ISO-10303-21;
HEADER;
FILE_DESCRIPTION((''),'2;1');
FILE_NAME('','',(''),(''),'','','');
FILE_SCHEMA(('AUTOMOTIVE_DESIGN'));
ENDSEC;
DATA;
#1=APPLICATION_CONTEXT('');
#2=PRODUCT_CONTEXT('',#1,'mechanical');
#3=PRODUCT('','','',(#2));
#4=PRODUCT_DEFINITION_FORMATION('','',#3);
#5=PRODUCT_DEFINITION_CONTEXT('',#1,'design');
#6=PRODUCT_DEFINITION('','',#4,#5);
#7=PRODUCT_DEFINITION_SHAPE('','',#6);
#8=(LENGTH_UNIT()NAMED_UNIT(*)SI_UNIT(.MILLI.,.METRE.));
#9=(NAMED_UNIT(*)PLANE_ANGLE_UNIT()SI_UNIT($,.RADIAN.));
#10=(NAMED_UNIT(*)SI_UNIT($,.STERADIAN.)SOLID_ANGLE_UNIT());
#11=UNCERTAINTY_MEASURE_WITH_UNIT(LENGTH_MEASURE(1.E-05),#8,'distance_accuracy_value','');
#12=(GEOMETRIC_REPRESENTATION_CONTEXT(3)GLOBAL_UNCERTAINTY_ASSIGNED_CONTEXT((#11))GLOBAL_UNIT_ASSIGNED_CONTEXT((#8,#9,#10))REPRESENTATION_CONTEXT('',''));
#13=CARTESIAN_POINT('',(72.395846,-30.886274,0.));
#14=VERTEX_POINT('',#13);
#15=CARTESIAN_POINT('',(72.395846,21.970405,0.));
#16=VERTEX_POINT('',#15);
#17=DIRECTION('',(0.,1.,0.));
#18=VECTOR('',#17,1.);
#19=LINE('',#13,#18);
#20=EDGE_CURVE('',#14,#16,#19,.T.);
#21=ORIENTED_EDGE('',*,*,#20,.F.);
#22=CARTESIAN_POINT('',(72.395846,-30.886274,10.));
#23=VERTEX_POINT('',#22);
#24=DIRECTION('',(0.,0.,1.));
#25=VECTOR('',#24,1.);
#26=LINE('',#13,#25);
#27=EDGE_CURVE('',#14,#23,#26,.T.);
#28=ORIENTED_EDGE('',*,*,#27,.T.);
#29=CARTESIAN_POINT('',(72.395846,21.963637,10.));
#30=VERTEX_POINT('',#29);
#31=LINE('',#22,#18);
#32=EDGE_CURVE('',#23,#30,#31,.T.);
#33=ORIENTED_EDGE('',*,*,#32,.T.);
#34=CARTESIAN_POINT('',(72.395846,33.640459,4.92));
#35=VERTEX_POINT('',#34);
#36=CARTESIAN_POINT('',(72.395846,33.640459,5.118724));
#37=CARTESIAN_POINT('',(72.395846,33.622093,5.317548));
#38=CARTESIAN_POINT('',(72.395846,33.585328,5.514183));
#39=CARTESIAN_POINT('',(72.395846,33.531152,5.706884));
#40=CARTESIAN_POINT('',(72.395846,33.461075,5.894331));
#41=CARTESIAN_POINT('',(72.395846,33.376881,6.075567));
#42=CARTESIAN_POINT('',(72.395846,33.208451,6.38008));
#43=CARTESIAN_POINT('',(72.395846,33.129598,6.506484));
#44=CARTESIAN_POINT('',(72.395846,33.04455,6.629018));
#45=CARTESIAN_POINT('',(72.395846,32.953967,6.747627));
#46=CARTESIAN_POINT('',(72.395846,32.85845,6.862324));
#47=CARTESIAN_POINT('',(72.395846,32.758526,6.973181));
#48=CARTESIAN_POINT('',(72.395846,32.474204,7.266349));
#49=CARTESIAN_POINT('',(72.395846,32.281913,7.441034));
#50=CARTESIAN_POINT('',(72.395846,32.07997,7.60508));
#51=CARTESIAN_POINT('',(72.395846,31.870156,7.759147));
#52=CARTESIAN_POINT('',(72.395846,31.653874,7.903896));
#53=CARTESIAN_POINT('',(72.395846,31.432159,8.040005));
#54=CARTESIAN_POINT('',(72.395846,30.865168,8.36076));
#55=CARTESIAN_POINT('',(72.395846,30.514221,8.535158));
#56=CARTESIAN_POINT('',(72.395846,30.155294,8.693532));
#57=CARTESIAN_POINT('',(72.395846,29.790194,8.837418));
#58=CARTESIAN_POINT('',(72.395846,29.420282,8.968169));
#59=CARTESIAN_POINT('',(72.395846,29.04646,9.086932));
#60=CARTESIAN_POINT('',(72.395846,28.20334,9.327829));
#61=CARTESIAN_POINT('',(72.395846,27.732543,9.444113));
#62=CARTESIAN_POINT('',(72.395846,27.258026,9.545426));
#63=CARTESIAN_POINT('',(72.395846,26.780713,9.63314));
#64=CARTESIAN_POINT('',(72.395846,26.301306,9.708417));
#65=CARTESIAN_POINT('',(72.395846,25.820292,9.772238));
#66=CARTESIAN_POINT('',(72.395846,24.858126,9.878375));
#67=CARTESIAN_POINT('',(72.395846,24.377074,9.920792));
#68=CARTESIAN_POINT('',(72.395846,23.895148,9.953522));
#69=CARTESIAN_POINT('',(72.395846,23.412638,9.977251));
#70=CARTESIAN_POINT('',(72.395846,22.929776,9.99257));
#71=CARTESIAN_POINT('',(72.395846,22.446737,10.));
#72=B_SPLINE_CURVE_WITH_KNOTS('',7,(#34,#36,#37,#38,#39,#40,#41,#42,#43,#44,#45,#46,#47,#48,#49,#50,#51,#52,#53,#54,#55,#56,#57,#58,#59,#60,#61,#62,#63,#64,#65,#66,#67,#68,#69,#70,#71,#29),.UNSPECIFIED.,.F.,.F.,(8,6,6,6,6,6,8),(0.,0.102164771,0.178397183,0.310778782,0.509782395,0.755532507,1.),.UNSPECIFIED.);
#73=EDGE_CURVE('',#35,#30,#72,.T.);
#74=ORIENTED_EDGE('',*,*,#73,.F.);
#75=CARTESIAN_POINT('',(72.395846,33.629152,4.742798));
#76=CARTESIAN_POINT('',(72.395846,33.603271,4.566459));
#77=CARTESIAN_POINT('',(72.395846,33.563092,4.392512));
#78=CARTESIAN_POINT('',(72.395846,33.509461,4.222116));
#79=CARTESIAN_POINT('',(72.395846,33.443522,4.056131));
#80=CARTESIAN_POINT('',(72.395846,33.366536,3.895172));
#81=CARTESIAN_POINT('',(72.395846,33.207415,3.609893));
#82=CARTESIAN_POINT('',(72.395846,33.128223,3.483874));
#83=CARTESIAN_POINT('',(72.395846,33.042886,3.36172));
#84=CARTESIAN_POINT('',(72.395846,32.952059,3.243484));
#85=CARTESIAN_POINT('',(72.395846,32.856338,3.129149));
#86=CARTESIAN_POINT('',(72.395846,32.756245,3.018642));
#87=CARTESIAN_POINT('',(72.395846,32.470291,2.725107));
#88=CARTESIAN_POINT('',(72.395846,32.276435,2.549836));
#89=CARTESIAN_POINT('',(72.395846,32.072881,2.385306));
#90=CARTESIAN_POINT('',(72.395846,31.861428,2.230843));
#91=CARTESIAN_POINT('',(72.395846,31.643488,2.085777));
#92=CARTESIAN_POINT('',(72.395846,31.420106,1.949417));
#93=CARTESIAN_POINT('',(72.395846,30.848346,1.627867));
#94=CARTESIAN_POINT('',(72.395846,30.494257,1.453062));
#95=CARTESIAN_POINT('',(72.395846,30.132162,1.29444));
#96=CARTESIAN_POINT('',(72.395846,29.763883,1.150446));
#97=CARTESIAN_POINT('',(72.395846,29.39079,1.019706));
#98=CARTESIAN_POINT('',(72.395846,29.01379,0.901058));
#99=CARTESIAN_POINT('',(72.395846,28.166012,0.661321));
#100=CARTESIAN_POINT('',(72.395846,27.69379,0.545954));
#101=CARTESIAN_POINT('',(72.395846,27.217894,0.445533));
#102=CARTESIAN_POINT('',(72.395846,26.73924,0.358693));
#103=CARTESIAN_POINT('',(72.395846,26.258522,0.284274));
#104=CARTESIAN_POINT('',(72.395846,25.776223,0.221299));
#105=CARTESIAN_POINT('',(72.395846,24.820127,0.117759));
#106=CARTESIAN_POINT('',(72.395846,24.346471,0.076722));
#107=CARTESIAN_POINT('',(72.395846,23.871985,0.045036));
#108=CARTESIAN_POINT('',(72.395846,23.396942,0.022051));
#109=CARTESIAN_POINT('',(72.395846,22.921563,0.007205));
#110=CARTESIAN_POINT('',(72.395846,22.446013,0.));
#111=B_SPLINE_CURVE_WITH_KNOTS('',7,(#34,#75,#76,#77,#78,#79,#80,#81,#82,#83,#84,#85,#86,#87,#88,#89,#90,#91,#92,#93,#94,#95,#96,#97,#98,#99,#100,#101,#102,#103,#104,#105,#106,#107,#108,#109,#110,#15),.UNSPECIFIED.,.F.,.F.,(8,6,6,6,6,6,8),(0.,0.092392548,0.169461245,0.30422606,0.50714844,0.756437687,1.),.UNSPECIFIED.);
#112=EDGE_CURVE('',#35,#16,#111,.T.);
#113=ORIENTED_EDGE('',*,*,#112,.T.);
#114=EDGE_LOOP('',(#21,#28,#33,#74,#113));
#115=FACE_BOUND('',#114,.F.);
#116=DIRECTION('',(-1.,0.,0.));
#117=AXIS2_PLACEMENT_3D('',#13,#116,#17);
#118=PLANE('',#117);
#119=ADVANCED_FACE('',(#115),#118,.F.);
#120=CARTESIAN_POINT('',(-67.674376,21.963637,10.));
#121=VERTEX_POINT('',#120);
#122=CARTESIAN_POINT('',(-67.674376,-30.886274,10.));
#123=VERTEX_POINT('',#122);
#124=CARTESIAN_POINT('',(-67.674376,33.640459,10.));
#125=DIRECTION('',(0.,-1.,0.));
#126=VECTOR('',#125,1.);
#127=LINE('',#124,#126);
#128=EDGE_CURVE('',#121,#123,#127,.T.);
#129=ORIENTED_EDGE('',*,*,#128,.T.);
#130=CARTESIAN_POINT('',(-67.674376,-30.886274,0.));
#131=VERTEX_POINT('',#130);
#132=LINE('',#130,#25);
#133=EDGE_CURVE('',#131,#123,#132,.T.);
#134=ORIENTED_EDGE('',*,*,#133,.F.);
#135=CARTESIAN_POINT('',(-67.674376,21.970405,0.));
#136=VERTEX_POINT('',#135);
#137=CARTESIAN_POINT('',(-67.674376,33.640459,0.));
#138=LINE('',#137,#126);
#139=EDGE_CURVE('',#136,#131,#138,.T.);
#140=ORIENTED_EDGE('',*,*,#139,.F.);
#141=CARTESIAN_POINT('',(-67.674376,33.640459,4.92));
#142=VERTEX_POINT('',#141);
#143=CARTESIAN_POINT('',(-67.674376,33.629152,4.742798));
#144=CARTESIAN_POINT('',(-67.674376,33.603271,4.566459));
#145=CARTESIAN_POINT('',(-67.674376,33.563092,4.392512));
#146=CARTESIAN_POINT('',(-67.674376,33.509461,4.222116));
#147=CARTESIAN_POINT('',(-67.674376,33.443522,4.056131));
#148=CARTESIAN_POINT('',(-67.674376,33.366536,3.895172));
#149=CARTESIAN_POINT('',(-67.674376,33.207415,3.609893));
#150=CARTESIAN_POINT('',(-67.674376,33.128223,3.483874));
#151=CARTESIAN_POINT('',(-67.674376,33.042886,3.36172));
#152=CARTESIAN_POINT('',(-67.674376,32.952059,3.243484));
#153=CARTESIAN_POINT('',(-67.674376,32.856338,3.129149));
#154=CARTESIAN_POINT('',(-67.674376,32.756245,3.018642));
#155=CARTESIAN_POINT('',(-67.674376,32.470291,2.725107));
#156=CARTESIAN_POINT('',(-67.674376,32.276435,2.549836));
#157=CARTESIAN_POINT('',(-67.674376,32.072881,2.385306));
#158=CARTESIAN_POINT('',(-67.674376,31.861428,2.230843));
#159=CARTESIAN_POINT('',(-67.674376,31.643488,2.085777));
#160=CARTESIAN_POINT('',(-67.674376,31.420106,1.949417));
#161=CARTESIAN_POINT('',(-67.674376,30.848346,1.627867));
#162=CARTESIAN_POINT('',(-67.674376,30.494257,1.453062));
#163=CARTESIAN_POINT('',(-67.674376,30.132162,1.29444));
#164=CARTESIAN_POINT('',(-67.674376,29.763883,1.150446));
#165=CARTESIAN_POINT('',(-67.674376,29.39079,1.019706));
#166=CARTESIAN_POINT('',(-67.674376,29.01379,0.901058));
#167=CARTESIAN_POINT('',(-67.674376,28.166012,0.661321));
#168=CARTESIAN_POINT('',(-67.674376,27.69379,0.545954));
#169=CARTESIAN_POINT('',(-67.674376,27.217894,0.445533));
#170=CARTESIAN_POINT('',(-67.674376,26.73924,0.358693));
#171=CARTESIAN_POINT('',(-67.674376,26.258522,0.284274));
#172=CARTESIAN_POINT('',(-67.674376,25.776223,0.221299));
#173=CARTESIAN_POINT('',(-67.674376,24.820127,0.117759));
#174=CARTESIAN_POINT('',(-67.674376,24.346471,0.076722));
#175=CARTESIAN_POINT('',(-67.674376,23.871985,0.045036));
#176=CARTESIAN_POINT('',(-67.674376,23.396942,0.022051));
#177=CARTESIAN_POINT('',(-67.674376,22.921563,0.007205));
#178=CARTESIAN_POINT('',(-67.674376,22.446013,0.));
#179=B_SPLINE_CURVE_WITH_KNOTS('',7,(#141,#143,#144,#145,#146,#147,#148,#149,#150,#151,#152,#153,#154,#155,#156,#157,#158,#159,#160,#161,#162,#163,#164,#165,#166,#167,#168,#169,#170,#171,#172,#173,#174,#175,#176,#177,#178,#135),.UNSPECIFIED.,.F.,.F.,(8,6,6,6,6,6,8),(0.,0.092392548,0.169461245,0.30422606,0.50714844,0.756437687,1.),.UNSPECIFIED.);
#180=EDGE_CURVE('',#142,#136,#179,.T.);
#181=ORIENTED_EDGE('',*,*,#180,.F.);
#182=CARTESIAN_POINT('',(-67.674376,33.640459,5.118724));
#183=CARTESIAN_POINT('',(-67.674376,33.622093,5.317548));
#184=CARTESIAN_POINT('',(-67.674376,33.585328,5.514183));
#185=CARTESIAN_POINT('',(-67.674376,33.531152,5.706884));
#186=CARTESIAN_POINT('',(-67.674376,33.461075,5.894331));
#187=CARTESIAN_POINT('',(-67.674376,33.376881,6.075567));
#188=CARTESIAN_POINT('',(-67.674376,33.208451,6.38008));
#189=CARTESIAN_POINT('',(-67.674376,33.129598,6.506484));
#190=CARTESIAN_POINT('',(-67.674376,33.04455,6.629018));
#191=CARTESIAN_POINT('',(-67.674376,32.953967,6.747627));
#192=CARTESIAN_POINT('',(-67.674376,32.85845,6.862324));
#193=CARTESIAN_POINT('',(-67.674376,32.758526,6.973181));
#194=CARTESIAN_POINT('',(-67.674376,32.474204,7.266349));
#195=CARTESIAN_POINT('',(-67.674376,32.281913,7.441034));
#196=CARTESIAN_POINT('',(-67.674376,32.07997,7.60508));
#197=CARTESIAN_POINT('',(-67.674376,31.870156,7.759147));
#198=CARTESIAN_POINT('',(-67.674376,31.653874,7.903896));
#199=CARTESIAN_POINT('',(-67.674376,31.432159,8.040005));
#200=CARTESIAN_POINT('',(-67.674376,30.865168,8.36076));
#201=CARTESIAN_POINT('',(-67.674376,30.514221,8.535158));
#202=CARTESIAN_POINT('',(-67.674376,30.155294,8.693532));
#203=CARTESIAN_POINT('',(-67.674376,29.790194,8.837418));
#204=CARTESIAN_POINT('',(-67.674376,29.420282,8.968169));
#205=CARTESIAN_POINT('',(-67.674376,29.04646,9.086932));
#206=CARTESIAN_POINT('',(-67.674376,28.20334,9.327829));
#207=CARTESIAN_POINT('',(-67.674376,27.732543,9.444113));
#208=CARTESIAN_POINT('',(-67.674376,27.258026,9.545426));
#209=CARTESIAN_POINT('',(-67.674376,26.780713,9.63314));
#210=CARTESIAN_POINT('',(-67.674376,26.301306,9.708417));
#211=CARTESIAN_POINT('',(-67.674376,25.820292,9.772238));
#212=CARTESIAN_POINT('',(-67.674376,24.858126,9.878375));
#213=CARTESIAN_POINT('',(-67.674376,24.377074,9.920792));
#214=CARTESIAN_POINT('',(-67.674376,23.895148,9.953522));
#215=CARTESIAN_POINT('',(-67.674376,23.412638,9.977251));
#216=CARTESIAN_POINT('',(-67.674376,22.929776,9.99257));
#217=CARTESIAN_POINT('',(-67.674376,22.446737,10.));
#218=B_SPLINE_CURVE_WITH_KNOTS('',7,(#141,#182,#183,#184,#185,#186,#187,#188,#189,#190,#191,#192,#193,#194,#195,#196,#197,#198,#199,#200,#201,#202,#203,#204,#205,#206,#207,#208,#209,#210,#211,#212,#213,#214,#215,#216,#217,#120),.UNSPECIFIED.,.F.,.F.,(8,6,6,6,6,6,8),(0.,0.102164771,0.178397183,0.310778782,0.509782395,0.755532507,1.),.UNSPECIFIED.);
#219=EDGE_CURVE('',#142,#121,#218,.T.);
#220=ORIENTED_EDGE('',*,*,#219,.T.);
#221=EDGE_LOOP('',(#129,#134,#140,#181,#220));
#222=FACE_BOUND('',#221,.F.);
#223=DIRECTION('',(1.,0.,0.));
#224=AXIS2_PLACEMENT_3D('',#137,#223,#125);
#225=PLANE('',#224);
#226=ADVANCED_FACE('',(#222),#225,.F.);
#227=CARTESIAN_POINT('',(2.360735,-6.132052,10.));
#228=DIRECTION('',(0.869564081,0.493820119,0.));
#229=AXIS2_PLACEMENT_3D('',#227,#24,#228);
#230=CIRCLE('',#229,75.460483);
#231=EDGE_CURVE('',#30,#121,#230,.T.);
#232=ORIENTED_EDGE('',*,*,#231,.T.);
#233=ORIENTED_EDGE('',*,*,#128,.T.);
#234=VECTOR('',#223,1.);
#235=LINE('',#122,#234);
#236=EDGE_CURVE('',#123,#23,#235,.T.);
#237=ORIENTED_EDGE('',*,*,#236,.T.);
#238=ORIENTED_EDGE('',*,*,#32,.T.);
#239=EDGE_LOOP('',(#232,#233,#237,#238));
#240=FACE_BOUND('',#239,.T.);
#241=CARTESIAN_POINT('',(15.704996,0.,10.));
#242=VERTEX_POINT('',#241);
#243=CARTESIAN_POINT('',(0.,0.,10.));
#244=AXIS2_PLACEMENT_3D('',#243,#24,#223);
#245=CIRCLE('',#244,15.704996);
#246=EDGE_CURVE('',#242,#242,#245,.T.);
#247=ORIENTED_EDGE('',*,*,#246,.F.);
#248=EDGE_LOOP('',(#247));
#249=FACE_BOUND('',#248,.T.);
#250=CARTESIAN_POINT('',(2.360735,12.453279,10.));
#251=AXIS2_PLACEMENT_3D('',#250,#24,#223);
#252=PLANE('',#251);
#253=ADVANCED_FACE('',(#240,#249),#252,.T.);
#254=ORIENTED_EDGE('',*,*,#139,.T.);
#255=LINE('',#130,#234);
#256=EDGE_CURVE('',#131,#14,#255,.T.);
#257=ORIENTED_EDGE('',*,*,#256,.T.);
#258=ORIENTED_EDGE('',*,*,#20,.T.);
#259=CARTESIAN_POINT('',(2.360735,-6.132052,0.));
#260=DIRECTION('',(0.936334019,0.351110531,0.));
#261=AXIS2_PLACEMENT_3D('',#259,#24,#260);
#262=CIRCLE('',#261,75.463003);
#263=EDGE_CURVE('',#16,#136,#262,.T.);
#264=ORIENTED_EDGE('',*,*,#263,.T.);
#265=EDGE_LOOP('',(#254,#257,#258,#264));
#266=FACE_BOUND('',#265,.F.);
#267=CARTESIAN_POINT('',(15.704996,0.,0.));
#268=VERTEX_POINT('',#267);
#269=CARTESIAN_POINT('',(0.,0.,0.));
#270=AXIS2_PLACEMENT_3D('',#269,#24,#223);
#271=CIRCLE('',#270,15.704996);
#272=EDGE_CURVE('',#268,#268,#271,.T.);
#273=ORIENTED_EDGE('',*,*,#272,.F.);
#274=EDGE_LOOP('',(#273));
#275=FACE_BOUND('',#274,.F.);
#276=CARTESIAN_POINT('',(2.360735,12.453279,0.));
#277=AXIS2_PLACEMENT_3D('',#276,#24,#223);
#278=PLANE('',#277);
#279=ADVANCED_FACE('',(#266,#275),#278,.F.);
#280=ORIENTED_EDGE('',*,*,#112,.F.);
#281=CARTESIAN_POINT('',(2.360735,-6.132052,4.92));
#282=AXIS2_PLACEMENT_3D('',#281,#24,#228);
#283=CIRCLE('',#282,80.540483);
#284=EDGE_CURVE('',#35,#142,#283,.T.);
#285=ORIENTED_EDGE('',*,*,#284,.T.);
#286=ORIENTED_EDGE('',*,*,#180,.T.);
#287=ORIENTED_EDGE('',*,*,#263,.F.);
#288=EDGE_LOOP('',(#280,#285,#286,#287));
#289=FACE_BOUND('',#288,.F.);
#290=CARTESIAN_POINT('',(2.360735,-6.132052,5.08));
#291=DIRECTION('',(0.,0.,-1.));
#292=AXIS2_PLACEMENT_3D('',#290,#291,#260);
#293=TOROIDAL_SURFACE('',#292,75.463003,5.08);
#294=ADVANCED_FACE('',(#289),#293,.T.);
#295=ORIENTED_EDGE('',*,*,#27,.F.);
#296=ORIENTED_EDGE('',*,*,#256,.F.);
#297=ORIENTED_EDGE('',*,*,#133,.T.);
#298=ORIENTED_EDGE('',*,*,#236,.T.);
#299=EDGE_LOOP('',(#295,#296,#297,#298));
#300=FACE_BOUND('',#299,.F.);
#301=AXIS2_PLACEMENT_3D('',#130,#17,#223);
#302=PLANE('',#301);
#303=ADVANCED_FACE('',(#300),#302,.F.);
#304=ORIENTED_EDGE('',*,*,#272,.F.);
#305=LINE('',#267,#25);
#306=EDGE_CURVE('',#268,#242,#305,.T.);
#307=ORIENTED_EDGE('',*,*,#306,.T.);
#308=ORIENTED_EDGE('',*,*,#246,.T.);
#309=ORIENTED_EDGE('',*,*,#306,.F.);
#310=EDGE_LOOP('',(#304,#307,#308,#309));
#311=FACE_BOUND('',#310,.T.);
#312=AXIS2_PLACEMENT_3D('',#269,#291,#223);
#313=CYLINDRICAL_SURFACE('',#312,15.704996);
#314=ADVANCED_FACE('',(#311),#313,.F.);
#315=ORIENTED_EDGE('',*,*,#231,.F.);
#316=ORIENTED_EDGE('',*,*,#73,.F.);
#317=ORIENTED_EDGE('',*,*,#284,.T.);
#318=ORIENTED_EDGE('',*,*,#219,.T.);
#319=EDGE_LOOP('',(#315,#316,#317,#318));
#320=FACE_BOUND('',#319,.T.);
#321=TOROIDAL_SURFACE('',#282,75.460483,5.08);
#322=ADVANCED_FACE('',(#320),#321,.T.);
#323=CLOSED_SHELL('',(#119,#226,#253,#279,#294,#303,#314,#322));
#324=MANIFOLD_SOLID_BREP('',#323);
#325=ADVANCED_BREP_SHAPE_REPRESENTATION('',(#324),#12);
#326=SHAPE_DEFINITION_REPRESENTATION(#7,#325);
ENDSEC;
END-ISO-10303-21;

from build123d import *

# Parameters (mm, degrees)
F0_R        = 15.7049958866
F1_DEPTH    = 10
F2_R        = 5.08
F3_T2_ANGLE = 138.8894896051


# Not quite as in the source:
# - a fillet or chamfer that OpenCascade refuses, or shapes differently, is made with other operations: its cross-section is extruded or revolved along the edge and cut away or added


with BuildPart() as f1:
    # F0 (on Top) → F1 (new body)
    with BuildSketch(Plane.XY):
        with BuildLine():
            Line((-67.6743760705, 33.6404591799), (-67.6743760705, -30.8862738311))
            Line((-67.6743760705, -30.8862738311), (72.3958462477, -30.8862738311))
            Line((72.3958462477, -30.8862738311), (72.3958462477, 33.6404591799))
            ThreePointArc((72.3958462477, 33.6404591799), (2.3607350886, 74.4084313611), (-67.6743760705, 33.6404591799))
        make_face()
        Circle(F0_R, mode=Mode.SUBTRACT)
    extrude(amount=F1_DEPTH)

    # F2
    f2_edges = [f1.edges().sort_by_distance(p)[0] for p in [
        (2.360735, 74.408431, 10),
    ]]
    fillet(f2_edges, radius=F2_R)

    # F3: fillet of radius 5.08 on 1 edges, made by hand

    # F3_s1 → F3_t2 (revolve, cut)
    with BuildSketch(Plane(origin=(2.3069814419, -6.152208534, 0), x_dir=(0, 0, 1), z_dir=(0.351110531, -0.9363340189, 0))):
        with BuildLine():
            ThreePointArc((4.92, -80.5978917459), (1.4317675513, -79.0554933848), (0, -75.5204120561))
            Line((0, -75.5204120561), (0, -80.5978917459))
            Line((0, -80.5978917459), (4.92, -80.5978917459))
        make_face()
    revolve(axis=Axis((2.3607350886, -6.1320517619, 0), (0, 0, 1)), revolution_arc=F3_T2_ANGLE, mode=Mode.SUBTRACT)


solid = f1.part
